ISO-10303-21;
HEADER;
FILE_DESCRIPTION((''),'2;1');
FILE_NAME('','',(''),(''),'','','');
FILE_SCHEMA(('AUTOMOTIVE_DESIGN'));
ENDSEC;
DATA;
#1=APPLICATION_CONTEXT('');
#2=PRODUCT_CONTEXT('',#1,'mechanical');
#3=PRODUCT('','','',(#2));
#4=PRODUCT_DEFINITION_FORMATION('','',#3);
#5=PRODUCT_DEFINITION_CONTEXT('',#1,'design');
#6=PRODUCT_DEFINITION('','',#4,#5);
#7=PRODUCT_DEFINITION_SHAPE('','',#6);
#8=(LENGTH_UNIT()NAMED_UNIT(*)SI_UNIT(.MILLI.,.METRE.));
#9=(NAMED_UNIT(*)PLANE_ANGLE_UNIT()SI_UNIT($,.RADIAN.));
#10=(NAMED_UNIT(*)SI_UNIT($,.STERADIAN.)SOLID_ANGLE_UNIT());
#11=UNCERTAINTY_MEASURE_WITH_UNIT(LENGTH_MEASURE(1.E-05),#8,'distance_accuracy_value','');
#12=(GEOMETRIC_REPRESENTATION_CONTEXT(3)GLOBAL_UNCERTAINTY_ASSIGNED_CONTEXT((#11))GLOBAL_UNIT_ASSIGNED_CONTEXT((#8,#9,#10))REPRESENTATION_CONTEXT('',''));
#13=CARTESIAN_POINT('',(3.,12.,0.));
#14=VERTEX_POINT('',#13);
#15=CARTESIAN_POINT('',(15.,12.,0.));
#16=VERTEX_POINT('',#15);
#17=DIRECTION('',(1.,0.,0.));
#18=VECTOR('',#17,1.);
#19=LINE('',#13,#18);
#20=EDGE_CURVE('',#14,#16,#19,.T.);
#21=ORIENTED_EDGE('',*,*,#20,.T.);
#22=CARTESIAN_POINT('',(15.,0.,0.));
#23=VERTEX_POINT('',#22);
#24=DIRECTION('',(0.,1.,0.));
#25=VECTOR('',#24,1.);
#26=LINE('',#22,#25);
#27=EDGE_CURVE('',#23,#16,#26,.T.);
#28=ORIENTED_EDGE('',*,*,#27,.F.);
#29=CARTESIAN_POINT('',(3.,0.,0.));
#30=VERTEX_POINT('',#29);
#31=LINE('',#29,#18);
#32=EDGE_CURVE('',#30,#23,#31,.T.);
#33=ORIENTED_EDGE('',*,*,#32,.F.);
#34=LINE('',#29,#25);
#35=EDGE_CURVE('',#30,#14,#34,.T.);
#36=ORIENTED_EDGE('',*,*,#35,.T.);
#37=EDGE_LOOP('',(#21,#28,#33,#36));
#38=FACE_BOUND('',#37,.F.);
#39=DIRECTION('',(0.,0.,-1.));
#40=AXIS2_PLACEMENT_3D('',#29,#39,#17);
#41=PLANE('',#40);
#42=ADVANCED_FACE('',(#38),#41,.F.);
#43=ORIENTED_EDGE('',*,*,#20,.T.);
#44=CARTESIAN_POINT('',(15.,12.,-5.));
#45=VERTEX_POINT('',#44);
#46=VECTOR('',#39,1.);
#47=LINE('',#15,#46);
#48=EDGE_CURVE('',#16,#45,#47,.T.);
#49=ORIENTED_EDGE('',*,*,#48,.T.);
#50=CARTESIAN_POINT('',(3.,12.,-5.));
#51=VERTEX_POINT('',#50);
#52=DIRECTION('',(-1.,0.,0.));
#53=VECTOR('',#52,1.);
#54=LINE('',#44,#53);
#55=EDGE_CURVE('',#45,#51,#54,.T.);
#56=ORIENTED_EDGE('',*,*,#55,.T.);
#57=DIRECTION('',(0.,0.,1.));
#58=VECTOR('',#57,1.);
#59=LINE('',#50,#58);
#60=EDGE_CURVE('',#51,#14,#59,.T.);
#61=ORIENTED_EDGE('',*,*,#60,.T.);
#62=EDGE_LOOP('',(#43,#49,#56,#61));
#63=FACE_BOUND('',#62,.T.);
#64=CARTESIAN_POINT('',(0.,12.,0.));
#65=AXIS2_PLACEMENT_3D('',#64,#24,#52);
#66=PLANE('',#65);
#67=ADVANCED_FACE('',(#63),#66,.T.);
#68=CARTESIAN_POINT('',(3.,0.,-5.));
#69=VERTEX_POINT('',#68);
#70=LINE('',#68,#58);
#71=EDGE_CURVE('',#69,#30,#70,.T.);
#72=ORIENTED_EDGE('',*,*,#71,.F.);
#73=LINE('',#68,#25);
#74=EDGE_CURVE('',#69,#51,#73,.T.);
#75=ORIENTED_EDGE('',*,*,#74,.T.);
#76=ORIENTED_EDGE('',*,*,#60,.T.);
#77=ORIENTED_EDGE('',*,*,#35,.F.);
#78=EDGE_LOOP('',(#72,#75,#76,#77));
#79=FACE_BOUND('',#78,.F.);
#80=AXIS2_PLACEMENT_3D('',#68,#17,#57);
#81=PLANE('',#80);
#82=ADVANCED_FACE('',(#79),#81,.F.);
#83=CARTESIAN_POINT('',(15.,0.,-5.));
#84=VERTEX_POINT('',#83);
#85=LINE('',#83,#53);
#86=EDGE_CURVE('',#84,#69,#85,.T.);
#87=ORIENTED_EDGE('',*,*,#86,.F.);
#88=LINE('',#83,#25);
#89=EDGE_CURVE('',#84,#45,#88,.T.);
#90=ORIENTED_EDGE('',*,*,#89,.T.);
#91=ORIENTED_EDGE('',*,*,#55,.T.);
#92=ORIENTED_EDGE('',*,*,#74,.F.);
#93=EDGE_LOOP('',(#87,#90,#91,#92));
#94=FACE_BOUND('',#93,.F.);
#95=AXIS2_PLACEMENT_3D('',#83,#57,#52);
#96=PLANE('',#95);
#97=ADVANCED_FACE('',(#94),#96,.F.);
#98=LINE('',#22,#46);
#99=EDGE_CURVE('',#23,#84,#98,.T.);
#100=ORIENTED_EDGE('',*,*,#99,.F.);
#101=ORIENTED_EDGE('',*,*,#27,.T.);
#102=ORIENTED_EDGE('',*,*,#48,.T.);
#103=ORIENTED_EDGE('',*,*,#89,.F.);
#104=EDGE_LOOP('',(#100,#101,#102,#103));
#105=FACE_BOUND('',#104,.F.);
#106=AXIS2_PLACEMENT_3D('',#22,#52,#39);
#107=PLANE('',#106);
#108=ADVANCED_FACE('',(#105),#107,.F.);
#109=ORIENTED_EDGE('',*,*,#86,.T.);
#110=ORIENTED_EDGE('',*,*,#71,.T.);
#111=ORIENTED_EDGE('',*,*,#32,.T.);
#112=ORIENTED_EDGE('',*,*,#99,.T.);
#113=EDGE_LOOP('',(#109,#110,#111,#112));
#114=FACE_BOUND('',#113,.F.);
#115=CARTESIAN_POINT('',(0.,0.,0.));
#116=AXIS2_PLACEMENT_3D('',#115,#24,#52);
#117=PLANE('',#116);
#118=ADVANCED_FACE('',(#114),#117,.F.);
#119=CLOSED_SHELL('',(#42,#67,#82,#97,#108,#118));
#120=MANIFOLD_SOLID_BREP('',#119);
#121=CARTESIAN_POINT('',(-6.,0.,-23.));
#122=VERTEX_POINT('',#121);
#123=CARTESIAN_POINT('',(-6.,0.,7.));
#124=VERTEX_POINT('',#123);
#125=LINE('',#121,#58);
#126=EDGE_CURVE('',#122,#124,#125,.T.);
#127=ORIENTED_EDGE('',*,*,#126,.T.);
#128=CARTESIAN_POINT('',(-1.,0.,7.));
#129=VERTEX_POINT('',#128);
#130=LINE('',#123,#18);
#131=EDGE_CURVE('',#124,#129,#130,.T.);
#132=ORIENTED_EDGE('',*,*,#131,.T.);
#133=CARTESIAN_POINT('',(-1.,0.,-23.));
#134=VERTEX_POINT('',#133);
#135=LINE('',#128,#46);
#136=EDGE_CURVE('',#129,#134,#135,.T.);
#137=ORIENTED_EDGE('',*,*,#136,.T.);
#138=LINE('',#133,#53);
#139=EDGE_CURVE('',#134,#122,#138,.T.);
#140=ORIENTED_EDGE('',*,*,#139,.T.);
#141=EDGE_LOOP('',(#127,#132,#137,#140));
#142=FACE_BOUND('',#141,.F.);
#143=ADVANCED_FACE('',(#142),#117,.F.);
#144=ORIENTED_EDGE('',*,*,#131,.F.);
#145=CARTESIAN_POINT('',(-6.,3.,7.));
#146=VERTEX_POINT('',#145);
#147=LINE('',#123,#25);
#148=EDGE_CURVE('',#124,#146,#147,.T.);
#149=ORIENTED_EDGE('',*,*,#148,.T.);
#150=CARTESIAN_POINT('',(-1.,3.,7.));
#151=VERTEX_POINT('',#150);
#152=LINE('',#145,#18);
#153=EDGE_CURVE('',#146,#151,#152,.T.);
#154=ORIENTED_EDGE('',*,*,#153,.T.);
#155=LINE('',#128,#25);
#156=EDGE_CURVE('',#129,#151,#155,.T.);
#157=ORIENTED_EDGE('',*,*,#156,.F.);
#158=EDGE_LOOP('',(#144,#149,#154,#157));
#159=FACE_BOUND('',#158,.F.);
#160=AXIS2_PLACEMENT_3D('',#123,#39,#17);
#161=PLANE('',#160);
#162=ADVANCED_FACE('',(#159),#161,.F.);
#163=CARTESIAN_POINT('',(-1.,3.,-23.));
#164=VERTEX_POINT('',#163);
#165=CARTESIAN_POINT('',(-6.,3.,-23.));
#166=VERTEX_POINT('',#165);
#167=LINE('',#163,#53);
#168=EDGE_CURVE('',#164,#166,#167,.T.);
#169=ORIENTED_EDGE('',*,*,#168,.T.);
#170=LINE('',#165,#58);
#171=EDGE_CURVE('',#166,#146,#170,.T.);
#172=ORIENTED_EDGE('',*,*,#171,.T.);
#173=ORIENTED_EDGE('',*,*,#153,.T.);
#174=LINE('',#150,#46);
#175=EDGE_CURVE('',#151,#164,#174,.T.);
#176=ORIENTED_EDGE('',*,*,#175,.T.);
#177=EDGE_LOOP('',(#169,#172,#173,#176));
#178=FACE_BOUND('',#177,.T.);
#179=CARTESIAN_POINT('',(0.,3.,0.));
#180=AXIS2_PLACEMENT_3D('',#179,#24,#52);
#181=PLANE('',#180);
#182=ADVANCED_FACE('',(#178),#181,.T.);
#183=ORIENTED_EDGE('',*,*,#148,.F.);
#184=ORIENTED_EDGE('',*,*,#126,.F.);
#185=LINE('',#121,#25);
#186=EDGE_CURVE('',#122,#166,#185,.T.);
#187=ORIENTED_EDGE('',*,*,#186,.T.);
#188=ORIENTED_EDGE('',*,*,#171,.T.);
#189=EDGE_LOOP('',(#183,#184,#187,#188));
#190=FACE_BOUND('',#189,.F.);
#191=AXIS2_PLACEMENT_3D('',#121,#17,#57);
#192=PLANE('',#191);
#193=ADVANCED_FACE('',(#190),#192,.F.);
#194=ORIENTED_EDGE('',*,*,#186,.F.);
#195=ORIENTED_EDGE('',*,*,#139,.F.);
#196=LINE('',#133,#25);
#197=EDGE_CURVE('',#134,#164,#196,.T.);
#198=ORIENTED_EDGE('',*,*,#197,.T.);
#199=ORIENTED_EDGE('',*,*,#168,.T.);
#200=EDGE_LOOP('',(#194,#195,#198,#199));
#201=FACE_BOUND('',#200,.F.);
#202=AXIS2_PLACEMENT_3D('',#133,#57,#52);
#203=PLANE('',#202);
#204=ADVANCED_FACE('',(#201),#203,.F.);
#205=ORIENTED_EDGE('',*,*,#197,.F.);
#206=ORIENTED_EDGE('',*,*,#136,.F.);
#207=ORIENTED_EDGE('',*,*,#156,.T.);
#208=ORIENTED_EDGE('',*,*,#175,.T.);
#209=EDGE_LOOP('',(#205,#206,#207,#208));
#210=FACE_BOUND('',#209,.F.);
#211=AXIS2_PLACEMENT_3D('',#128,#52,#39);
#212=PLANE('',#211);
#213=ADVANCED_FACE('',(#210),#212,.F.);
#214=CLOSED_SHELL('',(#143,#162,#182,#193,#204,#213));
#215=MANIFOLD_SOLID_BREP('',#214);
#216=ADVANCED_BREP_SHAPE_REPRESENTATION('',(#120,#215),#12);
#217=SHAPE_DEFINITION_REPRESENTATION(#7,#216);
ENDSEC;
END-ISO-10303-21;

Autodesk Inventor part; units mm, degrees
ref_plane "YZ Plane" through (0, 0, 0) normal (1, 0, 0) x (0, 1, 0)
ref_plane "XZ Plane" through (0, 0, 0) normal (0, 1, 0) x (-1, 0, 0)
ref_plane "XY Plane" through (0, 0, 0) normal (0, 0, 1) x (1, 0, 0)
sketch "Sketch1" plane through (0, 0, 0) normal (0, 1, 0) x (-1, 0, 0)
  line L0 (6, 7) -> (1, 7)
  line L1 (1, 7) -> (1, -23)
  line L2 (1, -23) -> (6, -23)
  line L3 (6, -23) -> (6, 7)
  line L4 (-3, 0) -> (-15, 0)
  line L5 (-15, 0) -> (-15, -5)
  line L6 (-15, -5) -> (-3, -5)
  line L7 (-3, -5) -> (-3, 0)
  point P0 (0, 0)
  dimension "d0" = 12
  dimension "d1" = 5
  dimension "d2" = 5
  dimension "d3" = 30
extrude "Extrusion1" add sketch "Sketch1" along normal blind 3 contours L3 L2 L1 L0
extrude "Extrusion2" add sketch "Sketch1" along normal blind 12 contours L7 L6 L5 L4
ref_plane "Work Plane1" through (1, 0, -5) normal (-1, 0, 0) x (0, 0, 1)
split body "Split1" result two bodies by plane through (1, 0, -5) normal (-1, 0, 0) first body at (-4.3333, 0.5, -13)
properties part number "Incastri 1"
